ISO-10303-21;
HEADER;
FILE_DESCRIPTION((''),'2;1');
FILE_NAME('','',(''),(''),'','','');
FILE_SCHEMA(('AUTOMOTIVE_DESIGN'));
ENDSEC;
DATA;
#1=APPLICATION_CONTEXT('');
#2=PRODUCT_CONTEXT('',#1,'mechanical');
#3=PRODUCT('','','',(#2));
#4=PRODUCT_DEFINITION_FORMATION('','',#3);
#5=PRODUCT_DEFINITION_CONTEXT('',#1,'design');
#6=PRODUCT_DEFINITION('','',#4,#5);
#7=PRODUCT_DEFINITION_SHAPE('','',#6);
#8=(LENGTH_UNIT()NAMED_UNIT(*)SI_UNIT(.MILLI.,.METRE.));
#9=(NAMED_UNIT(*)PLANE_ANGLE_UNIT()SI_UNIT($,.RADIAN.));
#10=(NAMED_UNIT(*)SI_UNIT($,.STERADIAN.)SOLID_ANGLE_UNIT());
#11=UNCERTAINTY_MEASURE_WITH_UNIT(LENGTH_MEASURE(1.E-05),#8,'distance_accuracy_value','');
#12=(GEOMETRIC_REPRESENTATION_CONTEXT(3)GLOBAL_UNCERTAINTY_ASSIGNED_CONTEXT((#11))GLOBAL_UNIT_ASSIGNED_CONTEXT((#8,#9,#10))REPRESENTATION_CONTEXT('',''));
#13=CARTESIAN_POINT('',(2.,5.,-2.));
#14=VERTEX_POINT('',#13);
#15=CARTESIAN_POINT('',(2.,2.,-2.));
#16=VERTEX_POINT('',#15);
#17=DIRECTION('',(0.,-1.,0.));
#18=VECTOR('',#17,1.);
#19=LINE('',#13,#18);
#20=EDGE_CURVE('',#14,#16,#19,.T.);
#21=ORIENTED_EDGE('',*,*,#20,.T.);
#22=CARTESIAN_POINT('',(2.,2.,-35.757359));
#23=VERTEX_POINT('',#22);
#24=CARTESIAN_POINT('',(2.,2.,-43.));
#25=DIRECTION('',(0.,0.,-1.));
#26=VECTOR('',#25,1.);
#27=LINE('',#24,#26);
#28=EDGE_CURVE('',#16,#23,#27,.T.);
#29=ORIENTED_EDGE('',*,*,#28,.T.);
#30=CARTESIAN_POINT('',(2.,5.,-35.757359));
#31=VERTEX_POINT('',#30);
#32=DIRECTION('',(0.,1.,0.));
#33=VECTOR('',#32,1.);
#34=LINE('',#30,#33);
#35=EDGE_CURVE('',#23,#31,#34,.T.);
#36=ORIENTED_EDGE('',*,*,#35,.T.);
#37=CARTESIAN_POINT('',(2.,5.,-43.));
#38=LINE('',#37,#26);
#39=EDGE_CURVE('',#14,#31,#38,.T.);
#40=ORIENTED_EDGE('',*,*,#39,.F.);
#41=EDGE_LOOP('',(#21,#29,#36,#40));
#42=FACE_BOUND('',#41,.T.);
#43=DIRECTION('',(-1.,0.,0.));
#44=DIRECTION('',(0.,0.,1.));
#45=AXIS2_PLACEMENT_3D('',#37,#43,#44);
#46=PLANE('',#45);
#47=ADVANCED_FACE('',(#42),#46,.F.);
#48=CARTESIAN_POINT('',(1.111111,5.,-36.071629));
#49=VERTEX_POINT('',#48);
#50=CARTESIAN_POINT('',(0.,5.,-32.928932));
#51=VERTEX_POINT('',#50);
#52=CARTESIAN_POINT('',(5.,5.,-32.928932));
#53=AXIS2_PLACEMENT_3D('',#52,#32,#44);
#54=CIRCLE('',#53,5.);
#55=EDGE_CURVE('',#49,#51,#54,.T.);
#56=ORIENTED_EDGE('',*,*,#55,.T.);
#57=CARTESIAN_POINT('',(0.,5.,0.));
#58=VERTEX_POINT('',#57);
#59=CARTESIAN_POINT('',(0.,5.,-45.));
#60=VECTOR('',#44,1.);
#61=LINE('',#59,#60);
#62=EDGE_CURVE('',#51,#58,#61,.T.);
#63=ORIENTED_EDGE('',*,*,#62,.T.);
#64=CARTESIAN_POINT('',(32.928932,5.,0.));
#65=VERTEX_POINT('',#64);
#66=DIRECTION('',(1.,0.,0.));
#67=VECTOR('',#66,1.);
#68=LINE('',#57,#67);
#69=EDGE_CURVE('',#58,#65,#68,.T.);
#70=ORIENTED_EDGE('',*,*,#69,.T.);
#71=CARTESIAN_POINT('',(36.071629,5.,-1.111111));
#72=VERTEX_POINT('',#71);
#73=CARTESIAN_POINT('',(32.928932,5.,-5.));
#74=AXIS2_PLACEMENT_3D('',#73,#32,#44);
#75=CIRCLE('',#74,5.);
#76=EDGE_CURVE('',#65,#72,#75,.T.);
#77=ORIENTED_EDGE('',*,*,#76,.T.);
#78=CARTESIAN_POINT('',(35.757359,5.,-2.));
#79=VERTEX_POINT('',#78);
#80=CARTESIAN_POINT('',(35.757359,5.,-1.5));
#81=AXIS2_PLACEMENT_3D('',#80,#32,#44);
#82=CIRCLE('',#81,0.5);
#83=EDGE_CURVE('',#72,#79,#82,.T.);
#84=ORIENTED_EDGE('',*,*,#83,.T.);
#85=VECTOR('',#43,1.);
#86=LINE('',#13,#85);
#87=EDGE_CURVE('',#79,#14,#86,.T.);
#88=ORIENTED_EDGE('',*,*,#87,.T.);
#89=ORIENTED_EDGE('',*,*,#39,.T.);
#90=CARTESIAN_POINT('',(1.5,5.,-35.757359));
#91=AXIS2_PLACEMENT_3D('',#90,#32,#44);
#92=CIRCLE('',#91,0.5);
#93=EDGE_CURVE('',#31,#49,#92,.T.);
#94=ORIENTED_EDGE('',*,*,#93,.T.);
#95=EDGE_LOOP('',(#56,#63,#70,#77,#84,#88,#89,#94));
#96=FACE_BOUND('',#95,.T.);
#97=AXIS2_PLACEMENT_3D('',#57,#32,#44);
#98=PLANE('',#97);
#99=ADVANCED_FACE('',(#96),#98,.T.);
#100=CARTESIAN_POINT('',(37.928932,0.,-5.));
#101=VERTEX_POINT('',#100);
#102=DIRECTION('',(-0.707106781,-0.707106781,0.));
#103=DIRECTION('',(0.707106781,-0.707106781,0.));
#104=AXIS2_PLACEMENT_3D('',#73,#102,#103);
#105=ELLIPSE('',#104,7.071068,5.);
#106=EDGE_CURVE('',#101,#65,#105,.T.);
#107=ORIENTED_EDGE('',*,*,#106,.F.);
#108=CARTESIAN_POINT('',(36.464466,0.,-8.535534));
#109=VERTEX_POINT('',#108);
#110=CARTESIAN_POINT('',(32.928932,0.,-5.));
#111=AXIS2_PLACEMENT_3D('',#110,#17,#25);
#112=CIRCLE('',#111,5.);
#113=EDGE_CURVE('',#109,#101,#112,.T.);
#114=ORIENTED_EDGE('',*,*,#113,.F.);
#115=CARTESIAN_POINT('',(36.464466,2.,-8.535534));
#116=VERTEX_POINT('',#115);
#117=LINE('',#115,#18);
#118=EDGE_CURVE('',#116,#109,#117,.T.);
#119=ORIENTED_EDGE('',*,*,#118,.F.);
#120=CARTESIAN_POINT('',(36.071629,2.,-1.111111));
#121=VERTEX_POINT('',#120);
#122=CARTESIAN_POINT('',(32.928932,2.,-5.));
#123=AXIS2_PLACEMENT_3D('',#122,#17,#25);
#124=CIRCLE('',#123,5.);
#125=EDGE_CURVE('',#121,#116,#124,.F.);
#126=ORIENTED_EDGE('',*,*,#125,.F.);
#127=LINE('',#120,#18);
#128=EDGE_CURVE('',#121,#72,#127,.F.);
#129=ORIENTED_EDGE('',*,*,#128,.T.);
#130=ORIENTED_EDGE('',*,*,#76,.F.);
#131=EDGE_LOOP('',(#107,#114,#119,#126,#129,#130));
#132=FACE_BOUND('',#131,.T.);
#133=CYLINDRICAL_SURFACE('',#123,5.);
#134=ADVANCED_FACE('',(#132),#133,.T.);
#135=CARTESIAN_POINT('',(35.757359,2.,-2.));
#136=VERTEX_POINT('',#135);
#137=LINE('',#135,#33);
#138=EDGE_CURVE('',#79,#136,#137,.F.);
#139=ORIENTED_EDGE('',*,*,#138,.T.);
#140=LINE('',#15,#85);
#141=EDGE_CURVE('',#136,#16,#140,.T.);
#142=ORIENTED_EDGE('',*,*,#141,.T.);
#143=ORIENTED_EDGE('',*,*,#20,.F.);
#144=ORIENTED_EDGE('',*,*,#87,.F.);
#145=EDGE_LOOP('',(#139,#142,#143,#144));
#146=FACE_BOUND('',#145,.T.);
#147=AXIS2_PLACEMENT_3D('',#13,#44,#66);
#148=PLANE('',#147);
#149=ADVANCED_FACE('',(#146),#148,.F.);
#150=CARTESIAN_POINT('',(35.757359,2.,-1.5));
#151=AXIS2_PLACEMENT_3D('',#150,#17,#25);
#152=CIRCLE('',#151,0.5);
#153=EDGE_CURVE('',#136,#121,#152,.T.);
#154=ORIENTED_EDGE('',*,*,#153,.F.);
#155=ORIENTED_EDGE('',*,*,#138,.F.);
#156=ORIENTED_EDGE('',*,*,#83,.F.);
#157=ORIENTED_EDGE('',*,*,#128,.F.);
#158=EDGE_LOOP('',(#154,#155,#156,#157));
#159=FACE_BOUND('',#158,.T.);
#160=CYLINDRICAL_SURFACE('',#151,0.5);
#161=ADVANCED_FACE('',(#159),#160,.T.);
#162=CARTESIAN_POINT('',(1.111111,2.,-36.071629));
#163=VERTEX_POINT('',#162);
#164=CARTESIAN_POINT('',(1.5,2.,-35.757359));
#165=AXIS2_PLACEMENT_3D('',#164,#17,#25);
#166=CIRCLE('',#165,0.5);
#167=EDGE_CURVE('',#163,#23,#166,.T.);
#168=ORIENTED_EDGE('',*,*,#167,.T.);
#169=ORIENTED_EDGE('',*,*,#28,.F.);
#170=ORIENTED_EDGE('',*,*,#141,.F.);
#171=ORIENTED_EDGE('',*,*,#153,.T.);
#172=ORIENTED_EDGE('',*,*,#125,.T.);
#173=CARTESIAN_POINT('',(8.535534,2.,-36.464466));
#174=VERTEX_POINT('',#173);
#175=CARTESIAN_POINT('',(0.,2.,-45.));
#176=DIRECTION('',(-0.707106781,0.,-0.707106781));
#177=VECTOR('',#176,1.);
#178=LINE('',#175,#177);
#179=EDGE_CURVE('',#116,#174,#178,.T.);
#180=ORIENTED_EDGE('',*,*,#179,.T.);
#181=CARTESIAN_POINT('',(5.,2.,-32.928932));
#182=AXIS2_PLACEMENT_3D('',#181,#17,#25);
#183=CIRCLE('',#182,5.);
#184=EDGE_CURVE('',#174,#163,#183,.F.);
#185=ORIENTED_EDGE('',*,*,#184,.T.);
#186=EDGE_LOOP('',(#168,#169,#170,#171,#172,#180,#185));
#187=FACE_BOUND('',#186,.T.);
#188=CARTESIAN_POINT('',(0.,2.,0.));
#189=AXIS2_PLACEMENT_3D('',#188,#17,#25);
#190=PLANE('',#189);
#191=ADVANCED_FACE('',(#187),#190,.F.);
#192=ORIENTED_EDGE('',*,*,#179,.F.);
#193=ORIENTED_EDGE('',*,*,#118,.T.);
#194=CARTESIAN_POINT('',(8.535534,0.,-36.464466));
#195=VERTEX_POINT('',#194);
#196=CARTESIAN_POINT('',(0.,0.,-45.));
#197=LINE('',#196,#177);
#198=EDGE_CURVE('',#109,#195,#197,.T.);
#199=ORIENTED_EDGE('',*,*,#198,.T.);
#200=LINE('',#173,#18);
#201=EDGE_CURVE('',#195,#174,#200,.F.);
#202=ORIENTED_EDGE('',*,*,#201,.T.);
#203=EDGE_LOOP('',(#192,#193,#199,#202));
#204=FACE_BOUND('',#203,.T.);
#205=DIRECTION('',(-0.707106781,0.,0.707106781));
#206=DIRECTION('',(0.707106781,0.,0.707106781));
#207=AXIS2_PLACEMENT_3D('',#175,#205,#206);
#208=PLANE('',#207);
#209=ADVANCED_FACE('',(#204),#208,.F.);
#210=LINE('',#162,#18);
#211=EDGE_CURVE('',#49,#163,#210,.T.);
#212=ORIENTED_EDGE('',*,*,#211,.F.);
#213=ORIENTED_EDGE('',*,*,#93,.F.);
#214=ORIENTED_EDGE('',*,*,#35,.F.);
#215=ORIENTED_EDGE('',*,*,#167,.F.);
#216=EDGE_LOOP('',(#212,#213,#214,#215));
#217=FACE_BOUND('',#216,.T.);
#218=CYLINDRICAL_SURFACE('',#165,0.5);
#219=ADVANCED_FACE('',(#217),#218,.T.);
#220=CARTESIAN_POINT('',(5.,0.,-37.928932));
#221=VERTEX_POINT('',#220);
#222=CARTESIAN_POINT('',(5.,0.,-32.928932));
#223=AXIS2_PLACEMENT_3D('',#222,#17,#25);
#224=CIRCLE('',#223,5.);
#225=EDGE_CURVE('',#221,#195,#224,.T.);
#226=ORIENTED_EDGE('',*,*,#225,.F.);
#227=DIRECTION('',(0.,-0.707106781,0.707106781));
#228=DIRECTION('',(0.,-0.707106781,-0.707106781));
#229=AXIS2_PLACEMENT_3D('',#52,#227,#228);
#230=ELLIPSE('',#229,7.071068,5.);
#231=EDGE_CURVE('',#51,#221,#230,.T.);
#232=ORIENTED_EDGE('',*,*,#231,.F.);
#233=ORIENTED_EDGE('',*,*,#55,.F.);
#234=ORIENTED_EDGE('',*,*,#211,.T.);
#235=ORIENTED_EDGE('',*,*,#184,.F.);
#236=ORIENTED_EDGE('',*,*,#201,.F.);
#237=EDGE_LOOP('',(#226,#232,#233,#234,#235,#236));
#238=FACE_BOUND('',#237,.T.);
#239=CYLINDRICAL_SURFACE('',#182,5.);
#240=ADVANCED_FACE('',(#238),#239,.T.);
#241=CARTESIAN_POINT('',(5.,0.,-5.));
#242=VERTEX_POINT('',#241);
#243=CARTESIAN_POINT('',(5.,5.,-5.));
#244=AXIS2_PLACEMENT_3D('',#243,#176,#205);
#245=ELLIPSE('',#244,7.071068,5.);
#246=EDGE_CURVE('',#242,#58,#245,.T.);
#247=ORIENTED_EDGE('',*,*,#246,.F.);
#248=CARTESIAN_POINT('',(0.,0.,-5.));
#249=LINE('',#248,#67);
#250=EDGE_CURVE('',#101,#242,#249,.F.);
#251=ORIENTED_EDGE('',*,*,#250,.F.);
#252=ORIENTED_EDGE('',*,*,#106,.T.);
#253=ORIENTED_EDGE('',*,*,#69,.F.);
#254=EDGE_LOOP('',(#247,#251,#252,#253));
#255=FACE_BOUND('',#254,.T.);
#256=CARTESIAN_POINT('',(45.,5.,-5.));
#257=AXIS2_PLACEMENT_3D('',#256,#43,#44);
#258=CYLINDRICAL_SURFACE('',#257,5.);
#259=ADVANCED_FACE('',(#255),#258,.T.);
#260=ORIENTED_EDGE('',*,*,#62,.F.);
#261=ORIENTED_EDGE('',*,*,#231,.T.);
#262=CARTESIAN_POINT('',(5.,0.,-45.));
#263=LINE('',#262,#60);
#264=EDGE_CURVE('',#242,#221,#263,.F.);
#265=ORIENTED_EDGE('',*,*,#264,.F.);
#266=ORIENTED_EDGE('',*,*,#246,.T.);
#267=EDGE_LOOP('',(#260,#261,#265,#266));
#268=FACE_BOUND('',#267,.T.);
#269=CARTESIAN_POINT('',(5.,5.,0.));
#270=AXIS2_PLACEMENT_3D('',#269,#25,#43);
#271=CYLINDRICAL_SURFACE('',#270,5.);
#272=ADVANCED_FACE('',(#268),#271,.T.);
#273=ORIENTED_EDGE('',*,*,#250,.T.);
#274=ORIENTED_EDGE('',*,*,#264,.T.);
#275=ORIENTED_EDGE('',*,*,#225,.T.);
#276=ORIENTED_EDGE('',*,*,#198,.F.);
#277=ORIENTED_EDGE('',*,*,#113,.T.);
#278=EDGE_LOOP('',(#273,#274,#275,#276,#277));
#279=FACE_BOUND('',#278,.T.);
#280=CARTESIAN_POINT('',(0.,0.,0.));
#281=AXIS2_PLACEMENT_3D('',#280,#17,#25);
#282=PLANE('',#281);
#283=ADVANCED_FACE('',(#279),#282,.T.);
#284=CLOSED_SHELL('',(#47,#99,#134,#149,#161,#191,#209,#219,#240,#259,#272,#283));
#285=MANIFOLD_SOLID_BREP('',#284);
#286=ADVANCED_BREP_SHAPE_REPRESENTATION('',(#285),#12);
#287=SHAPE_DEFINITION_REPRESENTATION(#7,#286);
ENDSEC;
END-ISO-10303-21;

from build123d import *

# Parameters (mm, degrees)
BOSS_EXTRUDE1_DEPTH = 2
BOSS_EXTRUDE2_DEPTH = 3
FILLET1_R           = 5
FILLET2_R           = 0.5


with BuildPart() as part:
    # Sketch1 → Boss-Extrude1 (new body)
    with BuildSketch(Plane(origin=(0, 0, 0), x_dir=(1, 0, 0), z_dir=(0, 1, 0))):
        Polygon((0, 0), (0, 45), (45, 0), align=None)
    extrude(amount=BOSS_EXTRUDE1_DEPTH)

    # Sketch2 → Boss-Extrude2 (add)
    with BuildSketch(Plane(origin=(0, 2, 0), x_dir=(1, 0, 0), z_dir=(0, 1, 0))):
        Polygon((2, 43), (2, 2), (43, 2), (45, 0), (0, 0), (0, 45), align=None)
    extrude(amount=BOSS_EXTRUDE2_DEPTH)

    # Fillet1
    fillet1_edges = [part.edges().sort_by_distance(p)[0] for p in [
        (0, 0, -22.5),
        (22.5, 0, 0),
        (45, 2.5, 0),
        (0, 2.5, -45),
    ]]
    fillet(fillet1_edges, radius=FILLET1_R - 0.0001)  # a hair under: the kernel refuses the full size

    # Fillet2
    fillet2_edges = [part.edges().sort_by_distance(p)[0] for p in [
        (36.929123609, 3.5, -2),
        (2, 3.5, -36.929123609),
    ]]
    fillet(fillet2_edges, radius=FILLET2_R)


solid = part.part
